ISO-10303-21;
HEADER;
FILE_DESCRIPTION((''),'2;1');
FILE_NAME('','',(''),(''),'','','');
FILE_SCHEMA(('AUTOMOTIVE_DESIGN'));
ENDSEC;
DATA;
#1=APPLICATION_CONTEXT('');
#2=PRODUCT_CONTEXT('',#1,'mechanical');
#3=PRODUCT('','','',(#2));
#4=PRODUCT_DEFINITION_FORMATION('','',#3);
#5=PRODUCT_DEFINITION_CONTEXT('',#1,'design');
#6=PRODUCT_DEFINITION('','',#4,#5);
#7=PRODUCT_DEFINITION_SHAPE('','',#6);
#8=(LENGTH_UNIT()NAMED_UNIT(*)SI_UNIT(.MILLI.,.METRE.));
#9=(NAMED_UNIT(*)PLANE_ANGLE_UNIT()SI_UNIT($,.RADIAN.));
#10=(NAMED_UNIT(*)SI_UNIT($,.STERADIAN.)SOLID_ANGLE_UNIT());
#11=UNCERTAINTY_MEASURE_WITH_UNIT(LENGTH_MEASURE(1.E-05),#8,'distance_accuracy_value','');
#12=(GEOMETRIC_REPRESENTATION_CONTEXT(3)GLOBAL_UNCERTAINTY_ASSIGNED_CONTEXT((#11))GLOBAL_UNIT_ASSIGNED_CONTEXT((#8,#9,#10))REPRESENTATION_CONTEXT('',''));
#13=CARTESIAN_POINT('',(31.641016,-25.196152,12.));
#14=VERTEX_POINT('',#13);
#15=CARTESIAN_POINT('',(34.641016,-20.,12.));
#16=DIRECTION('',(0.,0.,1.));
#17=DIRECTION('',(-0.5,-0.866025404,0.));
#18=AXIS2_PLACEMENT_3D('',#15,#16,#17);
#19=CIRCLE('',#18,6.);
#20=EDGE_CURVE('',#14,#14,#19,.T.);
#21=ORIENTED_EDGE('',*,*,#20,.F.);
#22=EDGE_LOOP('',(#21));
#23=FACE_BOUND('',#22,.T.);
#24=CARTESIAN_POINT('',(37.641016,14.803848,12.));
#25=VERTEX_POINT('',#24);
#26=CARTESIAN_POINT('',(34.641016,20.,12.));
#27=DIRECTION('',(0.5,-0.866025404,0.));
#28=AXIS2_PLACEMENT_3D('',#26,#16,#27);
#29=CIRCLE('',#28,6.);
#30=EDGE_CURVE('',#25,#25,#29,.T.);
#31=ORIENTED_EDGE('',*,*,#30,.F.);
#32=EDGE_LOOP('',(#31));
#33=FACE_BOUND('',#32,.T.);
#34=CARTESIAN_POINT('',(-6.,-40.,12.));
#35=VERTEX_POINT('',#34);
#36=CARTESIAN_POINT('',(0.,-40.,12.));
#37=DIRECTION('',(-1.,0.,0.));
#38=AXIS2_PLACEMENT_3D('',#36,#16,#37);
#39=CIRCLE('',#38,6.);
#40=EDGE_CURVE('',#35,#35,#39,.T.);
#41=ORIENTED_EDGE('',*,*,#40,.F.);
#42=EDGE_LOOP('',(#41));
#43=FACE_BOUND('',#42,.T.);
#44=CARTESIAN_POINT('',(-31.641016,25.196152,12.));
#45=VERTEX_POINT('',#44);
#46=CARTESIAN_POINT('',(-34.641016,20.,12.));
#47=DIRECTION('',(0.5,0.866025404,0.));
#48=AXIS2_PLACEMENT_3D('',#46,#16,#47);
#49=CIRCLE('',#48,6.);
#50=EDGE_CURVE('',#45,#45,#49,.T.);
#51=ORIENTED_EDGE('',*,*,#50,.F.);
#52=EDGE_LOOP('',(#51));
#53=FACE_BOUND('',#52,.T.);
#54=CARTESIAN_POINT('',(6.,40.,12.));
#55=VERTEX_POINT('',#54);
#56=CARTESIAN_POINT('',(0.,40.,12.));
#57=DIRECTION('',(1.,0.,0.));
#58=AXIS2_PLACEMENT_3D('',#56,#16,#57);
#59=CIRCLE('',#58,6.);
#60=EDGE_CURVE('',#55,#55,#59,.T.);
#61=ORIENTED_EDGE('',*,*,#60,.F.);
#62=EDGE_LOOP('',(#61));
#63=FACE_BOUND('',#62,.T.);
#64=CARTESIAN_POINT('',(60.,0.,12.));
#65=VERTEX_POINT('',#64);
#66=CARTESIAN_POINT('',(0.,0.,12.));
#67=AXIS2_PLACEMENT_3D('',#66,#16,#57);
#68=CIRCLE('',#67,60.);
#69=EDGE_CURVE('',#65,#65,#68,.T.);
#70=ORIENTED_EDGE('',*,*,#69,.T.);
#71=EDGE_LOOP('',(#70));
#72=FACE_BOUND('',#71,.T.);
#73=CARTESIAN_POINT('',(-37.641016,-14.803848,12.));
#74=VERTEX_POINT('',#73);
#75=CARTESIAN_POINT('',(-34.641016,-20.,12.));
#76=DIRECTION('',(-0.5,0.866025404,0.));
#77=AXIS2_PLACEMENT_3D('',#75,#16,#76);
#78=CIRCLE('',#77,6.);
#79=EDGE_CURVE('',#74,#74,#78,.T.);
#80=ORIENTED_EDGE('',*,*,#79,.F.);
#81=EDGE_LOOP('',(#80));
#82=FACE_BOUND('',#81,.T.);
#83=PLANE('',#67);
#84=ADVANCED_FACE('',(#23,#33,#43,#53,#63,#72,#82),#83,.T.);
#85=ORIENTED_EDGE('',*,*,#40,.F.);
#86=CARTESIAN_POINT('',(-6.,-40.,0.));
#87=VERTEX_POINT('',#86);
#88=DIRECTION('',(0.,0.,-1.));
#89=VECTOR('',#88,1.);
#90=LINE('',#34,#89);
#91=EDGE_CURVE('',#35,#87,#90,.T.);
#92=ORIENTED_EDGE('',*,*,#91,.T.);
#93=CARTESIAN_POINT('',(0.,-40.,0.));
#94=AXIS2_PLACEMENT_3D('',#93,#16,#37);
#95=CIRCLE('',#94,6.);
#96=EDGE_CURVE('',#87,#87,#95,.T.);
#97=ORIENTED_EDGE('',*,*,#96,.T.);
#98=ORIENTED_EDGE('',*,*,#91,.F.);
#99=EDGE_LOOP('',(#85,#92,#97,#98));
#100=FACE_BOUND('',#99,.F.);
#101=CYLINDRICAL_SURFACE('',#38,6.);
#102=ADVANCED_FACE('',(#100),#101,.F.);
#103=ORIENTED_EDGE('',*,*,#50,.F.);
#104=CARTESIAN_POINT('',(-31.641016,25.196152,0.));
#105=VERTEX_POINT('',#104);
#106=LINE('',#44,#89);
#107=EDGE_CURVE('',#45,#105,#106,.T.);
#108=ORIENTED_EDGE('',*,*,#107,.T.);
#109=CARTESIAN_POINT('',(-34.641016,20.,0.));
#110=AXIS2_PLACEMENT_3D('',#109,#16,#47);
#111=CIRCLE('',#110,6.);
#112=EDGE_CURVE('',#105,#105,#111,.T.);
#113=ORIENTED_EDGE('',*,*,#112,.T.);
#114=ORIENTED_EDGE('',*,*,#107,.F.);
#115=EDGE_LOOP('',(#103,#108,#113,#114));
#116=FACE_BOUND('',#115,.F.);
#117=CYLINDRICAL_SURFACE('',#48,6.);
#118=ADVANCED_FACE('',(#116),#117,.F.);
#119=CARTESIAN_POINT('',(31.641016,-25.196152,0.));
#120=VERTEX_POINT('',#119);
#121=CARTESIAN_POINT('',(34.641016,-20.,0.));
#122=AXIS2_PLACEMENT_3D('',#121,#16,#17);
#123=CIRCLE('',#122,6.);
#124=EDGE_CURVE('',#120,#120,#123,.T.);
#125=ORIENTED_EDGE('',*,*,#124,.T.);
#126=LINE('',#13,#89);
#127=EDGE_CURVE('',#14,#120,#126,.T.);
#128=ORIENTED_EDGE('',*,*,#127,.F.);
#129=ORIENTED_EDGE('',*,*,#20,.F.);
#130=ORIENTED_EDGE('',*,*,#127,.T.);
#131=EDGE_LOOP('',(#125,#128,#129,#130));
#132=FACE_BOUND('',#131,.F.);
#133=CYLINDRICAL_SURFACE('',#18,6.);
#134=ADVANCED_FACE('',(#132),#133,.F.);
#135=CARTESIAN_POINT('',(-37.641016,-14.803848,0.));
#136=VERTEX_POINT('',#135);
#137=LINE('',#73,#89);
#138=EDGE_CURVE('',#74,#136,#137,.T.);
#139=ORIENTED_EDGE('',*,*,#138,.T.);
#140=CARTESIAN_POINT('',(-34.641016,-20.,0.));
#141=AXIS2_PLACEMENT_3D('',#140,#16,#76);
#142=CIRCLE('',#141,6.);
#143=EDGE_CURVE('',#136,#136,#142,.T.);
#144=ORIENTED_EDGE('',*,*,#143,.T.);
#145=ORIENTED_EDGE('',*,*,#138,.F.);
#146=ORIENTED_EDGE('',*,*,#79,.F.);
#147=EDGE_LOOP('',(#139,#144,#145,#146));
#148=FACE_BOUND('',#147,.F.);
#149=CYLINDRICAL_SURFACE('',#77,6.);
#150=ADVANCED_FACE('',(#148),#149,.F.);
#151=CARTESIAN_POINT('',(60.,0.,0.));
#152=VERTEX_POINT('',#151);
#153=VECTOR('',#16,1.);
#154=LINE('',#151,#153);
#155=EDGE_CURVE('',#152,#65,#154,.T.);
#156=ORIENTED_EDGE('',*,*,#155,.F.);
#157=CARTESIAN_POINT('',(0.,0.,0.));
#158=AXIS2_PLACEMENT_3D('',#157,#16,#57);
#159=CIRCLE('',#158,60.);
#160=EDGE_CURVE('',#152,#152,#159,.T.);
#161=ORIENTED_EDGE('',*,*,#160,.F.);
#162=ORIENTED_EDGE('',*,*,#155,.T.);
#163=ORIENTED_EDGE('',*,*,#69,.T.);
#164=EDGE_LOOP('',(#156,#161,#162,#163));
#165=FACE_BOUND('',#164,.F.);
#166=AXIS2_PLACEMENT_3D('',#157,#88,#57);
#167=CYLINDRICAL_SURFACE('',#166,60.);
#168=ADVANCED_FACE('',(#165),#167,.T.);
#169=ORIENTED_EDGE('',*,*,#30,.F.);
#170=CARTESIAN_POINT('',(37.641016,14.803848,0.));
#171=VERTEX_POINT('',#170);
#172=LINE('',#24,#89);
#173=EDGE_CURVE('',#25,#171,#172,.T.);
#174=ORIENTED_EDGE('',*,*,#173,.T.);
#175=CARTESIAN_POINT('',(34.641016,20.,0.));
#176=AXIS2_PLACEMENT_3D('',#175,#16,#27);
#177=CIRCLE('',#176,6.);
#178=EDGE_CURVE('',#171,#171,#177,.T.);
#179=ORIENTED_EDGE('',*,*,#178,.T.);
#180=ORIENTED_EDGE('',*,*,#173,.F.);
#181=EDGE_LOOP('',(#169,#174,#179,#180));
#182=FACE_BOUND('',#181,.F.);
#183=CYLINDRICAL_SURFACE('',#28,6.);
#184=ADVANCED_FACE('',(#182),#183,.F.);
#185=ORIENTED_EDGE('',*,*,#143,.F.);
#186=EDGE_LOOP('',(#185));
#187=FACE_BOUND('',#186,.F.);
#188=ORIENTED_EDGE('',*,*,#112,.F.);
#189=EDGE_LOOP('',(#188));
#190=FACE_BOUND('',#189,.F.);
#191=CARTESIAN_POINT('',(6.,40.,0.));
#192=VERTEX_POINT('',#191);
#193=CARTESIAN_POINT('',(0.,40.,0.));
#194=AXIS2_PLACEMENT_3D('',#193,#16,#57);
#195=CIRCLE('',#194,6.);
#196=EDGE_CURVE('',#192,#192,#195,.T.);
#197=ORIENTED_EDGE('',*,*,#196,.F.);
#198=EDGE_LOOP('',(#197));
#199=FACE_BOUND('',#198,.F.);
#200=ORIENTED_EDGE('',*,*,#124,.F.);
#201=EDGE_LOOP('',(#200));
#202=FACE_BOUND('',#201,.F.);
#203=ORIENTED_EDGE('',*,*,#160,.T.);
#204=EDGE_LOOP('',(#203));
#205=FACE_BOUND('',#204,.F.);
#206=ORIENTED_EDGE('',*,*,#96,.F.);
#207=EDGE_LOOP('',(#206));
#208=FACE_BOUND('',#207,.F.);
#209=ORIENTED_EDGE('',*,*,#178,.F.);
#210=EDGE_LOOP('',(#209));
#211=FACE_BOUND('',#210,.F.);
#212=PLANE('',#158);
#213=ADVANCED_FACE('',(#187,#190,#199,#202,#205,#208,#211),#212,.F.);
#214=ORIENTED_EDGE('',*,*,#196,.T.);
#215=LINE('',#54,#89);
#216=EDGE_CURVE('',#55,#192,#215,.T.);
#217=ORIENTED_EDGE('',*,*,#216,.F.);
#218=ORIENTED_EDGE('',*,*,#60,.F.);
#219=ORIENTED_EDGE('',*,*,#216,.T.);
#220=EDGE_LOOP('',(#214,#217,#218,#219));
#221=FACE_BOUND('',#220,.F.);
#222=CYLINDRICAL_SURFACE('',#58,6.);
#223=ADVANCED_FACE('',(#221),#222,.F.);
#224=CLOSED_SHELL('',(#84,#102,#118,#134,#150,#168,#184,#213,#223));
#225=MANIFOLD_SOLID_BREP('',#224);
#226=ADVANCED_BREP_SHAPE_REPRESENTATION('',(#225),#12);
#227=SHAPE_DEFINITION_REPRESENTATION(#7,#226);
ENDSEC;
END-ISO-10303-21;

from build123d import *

# Parameters (mm, degrees)
F2_R            = 60
F3_DEPTH        = 12
F4_R            = 6
F5_DEPTH        = 12.001
F5_COPIES_COUNT = 6


# Not quite as in the source:
# - a pattern or mirror of a feature is missing from the dataset's text; its kind, count and spacing are read off the source's solid


with BuildPart() as f3:
    # F2 (on Top) → F3 (new body)
    with BuildSketch(Plane.XY):
        Circle(F2_R)
    extrude(amount=F3_DEPTH)

    # F4 (on face) → F5 (cut, through all)
    with BuildSketch(Plane.XY.offset(12)):
        with Locations((0, 40)):
            Circle(F4_R)
    f5 = extrude(amount=-F5_DEPTH, mode=Mode.SUBTRACT)

    # F5_copies: F5 ×6 about axis
    f5_copies_axis = Axis((0, 0, 0), (0, 0, 1))
    for i in range(1, F5_COPIES_COUNT):
        add(f5.rotate(f5_copies_axis, i * 360 / F5_COPIES_COUNT), mode=Mode.SUBTRACT)


solid = f3.part
